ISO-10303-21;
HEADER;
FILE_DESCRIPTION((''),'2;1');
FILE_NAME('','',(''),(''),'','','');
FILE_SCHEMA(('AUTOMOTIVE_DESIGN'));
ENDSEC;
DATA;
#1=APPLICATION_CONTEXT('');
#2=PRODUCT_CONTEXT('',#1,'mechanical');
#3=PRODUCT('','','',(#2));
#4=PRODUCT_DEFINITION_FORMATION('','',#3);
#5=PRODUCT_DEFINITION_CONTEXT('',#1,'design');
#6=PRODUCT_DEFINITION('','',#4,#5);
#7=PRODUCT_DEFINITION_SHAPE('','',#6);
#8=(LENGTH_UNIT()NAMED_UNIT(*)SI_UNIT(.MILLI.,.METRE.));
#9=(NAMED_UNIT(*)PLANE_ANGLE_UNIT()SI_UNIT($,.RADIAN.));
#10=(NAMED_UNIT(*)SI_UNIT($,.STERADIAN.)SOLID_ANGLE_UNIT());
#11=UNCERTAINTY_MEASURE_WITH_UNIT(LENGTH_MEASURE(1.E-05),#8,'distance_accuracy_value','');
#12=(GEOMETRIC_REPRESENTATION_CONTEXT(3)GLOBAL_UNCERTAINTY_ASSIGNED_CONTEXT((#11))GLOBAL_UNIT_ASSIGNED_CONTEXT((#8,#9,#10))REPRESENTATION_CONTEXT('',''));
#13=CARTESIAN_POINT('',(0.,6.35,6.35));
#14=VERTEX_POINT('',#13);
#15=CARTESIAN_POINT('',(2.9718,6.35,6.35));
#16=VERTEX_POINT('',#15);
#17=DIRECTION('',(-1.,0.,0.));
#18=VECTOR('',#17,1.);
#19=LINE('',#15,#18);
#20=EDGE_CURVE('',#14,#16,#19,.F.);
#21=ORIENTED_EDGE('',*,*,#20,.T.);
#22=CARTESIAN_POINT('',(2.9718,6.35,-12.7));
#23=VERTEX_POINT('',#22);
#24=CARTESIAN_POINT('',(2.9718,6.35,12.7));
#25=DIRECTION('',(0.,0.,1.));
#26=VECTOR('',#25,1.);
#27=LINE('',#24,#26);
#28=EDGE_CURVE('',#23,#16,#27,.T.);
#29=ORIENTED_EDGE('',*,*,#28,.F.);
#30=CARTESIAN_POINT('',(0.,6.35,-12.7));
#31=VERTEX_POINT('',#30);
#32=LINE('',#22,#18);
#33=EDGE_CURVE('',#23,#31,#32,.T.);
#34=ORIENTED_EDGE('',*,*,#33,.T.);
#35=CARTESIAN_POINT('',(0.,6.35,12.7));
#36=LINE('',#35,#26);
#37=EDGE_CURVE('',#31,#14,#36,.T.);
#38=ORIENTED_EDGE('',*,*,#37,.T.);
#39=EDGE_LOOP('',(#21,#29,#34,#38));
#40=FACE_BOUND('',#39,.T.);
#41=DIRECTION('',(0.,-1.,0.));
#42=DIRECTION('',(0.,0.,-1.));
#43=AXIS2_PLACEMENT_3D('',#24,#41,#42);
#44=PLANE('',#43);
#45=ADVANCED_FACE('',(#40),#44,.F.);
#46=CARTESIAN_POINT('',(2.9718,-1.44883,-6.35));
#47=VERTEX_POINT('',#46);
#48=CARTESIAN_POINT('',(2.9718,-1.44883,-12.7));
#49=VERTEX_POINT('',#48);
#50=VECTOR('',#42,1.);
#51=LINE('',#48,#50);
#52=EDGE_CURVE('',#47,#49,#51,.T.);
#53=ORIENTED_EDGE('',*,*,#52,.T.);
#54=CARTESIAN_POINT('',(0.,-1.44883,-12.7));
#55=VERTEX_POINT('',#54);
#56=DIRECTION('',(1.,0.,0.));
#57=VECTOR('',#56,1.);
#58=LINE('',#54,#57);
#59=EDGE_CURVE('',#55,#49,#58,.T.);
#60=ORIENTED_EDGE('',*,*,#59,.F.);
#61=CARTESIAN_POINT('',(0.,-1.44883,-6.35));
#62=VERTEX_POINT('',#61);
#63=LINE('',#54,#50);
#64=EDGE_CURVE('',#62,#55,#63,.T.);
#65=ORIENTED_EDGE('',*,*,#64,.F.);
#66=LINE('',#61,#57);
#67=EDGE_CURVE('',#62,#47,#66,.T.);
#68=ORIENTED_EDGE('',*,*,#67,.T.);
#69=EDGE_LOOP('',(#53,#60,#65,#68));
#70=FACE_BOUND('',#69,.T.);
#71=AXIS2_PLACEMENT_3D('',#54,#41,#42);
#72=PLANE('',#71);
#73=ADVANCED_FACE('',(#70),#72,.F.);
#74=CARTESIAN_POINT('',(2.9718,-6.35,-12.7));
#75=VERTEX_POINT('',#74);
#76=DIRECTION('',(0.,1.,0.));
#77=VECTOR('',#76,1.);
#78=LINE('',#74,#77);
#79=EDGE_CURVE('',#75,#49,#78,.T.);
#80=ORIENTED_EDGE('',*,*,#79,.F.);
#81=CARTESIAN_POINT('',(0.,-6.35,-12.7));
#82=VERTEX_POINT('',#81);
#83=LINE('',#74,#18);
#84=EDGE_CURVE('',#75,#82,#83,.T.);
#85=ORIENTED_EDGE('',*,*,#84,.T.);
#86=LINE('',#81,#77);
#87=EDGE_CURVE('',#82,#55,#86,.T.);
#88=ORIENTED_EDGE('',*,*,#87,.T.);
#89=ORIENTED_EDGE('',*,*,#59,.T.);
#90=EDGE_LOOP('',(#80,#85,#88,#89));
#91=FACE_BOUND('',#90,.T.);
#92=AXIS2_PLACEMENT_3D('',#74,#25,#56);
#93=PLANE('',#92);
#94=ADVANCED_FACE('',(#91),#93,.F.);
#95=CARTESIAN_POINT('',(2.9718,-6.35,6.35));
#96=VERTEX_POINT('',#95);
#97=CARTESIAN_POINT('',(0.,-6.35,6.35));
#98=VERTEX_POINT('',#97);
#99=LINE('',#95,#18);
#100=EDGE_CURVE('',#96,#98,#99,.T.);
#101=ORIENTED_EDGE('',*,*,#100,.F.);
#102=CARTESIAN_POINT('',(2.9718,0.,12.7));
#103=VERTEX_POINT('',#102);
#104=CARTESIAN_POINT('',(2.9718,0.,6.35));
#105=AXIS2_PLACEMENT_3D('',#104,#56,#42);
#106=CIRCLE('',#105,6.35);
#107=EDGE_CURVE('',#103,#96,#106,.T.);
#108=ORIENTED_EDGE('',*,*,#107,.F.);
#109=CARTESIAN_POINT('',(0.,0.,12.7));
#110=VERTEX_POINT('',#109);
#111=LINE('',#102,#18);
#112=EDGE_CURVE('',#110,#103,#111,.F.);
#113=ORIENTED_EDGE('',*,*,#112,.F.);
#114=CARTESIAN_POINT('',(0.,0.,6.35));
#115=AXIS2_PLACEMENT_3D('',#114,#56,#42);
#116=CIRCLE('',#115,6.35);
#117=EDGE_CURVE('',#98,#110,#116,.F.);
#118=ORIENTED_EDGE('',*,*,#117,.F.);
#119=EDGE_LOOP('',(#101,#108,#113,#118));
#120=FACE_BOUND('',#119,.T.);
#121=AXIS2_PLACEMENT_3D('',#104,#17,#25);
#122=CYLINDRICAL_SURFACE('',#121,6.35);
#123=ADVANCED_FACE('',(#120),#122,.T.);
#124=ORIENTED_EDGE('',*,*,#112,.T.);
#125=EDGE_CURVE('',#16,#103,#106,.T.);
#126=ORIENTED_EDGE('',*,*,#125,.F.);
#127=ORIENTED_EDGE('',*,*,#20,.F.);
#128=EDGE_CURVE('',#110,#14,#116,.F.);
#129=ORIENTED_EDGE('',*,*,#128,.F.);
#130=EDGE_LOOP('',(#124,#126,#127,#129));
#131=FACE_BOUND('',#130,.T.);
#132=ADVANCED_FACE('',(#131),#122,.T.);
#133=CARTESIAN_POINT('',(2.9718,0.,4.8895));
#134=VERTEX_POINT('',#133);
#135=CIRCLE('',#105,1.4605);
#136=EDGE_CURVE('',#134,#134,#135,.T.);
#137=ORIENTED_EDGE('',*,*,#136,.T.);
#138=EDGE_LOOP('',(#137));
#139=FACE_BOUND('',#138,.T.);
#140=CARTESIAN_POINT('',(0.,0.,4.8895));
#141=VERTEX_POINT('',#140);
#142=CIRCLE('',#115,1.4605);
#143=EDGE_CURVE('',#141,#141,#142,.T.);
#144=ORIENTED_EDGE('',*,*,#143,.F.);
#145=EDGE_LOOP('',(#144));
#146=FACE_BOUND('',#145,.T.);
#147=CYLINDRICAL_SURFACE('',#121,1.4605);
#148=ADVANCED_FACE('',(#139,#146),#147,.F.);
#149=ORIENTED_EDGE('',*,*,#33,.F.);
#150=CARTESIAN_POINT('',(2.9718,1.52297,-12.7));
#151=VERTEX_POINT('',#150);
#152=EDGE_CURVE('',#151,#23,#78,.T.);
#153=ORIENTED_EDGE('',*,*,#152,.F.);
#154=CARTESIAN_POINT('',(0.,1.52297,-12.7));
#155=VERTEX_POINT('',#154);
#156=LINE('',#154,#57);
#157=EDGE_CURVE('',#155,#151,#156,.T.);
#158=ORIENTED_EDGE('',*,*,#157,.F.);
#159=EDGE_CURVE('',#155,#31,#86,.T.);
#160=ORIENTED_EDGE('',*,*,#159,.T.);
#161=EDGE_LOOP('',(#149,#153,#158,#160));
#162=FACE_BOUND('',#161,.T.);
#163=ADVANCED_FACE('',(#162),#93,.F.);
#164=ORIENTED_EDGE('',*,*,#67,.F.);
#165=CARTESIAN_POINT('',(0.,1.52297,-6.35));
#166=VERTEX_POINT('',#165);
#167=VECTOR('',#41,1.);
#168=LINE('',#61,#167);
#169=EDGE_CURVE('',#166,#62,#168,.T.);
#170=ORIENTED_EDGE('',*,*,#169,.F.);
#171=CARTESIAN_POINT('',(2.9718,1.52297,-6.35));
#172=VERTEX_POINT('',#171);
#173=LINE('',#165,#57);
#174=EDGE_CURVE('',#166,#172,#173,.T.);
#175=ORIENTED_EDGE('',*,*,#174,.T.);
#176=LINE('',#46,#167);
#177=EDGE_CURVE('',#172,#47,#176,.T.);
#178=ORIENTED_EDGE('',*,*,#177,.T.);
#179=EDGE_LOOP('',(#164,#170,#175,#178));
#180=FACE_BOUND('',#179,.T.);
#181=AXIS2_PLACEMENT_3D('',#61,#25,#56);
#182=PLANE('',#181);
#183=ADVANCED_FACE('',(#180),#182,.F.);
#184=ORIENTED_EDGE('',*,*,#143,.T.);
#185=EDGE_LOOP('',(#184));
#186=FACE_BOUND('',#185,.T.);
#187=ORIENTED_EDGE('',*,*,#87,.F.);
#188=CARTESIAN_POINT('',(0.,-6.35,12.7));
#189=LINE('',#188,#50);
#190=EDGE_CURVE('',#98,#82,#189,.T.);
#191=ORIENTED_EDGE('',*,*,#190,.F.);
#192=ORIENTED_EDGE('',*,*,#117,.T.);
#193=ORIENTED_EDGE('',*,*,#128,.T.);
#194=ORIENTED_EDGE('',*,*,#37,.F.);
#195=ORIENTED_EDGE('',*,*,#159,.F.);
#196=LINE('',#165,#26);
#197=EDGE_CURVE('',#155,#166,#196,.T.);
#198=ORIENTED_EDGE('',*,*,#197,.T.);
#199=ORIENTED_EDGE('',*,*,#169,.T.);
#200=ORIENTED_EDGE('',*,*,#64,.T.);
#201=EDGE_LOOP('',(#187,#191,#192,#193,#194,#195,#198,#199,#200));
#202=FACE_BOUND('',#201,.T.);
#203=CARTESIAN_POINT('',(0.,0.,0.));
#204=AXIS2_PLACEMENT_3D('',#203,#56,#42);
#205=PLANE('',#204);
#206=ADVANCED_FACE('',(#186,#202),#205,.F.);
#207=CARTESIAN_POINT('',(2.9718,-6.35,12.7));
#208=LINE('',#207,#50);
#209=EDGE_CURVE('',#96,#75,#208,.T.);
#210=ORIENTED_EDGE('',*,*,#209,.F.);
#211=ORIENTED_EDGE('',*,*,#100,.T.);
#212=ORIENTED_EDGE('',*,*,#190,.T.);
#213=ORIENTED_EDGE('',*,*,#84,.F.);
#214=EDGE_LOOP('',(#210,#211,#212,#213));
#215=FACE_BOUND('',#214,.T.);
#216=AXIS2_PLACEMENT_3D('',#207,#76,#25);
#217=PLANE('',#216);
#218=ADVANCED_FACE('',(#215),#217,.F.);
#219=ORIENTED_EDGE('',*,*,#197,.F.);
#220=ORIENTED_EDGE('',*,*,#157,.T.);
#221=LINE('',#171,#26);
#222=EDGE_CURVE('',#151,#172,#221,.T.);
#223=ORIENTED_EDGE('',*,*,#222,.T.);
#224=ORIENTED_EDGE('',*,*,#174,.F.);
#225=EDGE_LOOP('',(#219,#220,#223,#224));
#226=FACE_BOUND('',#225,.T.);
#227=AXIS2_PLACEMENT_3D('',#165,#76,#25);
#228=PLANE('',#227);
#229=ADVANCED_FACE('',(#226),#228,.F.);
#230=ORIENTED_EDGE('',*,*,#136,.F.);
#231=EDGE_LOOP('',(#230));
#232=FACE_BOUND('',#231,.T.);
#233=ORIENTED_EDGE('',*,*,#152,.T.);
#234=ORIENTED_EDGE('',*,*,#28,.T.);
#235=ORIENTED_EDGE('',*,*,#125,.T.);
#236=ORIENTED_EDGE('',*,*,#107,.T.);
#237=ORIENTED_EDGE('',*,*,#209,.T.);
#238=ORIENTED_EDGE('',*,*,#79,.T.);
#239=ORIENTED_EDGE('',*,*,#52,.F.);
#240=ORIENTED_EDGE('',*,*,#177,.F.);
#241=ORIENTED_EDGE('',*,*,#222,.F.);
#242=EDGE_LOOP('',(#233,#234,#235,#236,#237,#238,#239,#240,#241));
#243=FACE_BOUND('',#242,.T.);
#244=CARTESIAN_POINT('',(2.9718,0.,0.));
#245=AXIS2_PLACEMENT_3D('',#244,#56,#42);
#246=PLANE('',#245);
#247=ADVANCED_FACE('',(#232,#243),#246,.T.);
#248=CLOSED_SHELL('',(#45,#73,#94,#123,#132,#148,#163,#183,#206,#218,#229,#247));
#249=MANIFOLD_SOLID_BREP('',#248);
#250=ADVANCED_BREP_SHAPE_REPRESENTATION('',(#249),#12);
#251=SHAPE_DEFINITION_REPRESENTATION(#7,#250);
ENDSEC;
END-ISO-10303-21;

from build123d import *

# Parameters (mm, degrees)
SKETCH1_W           = 12.7
SKETCH1_H           = 25.4
SKETCH1_R           = 1.4605
BOSS_EXTRUDE1_DEPTH = 2.9718
SKETCH2_W           = 2.9718
SKETCH2_H           = 6.35
CUT_EXTRUDE1_DEPTH  = 15.506691395
FILLET3_R           = 6.35


with BuildPart() as part:
    # Sketch1 → Boss-Extrude1 (new body)
    with BuildSketch(Plane.YZ):
        Rectangle(SKETCH1_W, SKETCH1_H)
        with Locations(Location((0, 6.35, 0), (0, 0, 270))):
            Circle(SKETCH1_R, mode=Mode.SUBTRACT)
    extrude(amount=BOSS_EXTRUDE1_DEPTH)

    # Sketch2 → Cut-Extrude1 (cut, through all)
    with BuildSketch(Plane.YZ.offset(2.9718)):
        with Locations((0.037070408, -9.525)):
            Rectangle(SKETCH2_W, SKETCH2_H)
    extrude(amount=-CUT_EXTRUDE1_DEPTH, mode=Mode.SUBTRACT)

    # Fillet3
    fillet3_edges = [part.edges().sort_by_distance(p)[0] for p in [
        (1.4859, -6.35, 12.7),
        (1.4859, 6.35, 12.7),
    ]]
    fillet(fillet3_edges, radius=FILLET3_R - 0.0001)  # a hair under: the kernel refuses the full size


solid = part.part
